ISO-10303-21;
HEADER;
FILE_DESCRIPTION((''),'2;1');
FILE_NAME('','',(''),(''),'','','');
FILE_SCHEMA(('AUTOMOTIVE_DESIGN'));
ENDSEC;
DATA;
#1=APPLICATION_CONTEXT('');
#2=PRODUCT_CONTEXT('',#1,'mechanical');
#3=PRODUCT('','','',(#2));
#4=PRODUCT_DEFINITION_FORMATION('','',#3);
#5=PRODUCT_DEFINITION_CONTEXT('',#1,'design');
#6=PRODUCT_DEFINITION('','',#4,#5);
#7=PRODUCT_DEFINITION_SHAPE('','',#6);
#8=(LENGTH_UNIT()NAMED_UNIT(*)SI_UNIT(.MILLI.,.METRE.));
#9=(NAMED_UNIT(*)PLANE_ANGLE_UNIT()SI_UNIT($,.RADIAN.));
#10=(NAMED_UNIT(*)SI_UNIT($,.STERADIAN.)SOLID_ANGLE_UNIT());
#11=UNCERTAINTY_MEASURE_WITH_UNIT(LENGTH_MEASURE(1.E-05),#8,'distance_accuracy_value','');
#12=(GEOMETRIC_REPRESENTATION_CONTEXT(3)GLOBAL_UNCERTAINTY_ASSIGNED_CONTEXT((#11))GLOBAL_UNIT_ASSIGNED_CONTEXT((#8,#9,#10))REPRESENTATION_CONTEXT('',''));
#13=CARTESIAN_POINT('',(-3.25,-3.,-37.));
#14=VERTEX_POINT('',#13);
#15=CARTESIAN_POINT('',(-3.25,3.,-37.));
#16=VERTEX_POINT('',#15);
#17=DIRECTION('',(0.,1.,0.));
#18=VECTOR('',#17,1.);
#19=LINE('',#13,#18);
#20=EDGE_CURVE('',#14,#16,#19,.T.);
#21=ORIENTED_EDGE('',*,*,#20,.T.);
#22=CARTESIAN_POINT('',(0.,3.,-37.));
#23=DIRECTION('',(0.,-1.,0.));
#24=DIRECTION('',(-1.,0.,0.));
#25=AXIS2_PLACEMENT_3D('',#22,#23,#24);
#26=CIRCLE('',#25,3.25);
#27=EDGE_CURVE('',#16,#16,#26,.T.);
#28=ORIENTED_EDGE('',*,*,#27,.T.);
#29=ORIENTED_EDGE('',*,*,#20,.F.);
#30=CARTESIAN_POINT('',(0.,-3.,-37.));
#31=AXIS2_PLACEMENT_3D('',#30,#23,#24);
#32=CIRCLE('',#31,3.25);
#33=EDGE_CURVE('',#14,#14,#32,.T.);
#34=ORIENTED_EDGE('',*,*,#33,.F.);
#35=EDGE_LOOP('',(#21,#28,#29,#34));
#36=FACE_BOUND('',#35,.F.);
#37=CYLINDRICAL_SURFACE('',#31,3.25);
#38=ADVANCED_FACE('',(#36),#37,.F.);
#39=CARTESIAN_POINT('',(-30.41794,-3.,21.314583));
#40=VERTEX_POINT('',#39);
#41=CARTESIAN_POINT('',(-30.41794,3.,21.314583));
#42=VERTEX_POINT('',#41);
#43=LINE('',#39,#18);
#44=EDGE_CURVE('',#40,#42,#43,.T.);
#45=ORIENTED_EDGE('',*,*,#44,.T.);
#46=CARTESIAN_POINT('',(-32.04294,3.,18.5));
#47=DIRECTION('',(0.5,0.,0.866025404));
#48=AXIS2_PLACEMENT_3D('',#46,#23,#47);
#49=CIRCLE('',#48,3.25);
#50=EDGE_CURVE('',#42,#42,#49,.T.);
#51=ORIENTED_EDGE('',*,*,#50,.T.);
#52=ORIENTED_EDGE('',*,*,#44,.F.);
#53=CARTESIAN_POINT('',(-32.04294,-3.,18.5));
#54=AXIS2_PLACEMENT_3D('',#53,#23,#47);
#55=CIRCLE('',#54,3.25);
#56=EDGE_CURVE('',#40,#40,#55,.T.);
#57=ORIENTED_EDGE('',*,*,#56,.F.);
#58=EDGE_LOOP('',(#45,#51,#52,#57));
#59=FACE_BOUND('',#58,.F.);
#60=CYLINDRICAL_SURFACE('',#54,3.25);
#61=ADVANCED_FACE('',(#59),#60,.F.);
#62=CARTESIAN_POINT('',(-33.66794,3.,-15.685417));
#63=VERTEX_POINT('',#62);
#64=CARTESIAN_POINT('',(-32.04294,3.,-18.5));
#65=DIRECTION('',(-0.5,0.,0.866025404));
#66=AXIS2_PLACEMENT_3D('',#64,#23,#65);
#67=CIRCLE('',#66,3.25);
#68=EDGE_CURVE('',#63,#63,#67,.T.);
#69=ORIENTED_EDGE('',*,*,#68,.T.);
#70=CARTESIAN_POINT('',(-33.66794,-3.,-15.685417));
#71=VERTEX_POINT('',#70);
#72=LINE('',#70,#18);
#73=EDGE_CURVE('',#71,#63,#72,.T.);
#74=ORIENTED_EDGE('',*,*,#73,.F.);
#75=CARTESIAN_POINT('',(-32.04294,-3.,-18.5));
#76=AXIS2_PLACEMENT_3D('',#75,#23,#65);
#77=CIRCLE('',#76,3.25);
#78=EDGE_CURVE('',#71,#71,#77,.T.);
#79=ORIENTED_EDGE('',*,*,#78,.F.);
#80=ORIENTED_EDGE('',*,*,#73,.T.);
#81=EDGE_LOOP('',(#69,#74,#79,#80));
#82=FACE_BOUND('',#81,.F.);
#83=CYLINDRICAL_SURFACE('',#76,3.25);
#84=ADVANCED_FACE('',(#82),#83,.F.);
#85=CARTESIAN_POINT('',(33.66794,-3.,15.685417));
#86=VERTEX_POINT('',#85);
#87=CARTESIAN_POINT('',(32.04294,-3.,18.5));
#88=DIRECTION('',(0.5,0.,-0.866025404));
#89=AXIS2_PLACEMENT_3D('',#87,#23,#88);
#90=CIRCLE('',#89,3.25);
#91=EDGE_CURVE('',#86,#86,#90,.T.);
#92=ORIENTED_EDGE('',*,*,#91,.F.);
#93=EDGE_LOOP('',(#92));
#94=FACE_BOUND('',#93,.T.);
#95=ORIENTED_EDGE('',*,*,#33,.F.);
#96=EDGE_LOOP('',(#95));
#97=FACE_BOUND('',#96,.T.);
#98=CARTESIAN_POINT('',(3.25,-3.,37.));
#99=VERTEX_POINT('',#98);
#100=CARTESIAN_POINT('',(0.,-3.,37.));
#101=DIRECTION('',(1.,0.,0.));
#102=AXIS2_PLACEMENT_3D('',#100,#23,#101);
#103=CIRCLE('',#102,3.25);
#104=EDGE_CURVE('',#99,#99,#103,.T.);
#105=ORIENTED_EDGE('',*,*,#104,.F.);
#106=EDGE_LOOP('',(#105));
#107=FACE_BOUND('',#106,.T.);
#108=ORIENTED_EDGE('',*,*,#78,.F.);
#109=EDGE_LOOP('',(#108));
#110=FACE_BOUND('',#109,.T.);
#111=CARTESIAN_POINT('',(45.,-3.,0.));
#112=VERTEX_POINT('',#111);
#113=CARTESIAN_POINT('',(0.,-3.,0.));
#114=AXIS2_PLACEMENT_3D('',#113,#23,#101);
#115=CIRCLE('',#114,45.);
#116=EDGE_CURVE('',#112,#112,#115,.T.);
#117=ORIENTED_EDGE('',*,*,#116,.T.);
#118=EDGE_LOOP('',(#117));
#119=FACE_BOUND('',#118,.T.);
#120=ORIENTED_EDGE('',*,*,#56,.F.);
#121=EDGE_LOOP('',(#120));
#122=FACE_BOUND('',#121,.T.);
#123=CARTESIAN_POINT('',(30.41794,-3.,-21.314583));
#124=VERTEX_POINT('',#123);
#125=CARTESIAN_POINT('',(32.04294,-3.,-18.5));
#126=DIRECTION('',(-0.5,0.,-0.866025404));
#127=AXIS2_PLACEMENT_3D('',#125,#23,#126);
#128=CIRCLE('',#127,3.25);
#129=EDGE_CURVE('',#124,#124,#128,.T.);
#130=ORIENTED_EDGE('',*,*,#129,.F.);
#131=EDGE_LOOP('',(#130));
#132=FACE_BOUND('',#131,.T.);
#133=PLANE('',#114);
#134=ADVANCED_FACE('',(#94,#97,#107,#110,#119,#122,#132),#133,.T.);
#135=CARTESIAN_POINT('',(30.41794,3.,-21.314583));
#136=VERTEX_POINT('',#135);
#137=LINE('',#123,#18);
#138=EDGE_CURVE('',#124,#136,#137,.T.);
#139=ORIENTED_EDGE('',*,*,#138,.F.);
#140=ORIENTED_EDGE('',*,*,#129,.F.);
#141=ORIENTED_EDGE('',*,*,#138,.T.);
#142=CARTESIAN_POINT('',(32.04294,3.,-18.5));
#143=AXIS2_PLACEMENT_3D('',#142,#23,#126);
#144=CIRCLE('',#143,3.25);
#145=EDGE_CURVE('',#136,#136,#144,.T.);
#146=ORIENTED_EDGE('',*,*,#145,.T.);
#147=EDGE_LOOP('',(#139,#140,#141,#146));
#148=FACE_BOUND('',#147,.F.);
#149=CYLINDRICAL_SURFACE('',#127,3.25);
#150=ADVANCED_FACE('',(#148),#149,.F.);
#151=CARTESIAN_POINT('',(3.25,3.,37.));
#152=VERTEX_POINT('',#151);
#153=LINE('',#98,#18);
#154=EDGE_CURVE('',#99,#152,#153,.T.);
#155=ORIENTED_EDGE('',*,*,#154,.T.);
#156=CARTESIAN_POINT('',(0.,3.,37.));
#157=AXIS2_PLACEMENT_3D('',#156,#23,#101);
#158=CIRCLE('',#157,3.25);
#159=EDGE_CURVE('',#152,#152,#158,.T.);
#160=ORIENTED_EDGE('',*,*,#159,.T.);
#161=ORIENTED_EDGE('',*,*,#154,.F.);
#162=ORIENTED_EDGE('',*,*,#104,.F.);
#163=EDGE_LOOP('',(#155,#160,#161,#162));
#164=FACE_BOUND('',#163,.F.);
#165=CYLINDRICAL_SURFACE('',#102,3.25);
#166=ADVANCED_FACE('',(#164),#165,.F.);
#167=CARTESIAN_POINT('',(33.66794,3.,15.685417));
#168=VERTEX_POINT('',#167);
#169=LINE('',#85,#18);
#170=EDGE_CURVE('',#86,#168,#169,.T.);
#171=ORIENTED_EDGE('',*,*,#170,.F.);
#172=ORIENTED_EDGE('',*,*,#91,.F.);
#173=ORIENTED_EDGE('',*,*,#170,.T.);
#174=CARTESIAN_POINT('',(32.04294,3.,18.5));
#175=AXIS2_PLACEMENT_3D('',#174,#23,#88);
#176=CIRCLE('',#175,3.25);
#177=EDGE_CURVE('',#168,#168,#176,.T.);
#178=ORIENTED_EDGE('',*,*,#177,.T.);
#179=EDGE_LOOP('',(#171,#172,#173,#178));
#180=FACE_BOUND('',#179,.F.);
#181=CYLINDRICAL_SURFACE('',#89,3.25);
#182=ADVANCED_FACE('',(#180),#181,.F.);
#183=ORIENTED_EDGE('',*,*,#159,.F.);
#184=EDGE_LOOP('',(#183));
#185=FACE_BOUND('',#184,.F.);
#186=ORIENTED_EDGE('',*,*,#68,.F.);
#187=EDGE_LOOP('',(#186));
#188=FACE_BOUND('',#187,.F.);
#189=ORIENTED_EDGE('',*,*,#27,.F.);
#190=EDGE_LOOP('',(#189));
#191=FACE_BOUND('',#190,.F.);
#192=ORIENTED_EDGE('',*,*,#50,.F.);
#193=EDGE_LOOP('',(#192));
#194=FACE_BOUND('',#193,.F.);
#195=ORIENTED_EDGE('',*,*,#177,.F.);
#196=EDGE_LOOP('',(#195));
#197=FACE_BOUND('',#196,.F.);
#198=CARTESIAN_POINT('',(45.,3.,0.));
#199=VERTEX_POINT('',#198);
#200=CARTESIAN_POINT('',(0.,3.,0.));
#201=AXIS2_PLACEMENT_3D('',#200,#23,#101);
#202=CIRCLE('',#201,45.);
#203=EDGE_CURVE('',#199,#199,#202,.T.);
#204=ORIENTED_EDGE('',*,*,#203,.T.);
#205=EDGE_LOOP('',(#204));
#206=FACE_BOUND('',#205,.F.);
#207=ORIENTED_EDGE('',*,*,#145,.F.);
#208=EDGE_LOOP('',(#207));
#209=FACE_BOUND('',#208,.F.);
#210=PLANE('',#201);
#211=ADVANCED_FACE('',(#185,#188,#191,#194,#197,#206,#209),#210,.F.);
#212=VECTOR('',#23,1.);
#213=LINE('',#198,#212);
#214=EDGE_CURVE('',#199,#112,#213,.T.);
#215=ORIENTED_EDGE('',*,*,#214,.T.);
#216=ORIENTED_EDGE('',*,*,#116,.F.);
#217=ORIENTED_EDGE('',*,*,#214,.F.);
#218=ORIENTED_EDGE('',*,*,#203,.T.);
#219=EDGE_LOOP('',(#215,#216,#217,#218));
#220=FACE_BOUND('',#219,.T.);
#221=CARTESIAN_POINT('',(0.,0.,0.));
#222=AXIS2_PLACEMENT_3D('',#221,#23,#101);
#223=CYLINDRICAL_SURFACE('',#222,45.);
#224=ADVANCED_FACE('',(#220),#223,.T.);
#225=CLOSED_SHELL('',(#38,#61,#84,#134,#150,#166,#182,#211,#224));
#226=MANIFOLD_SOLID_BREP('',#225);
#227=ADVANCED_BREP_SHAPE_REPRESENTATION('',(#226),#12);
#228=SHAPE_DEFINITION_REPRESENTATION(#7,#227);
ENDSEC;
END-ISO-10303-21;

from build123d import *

# Parameters (mm, degrees)
F0_R            = 45
F1_DEPTH        = 3
F2_R            = 3.25
F3_DEPTH        = 25
F3_COPIES_COUNT = 6


# Not quite as in the source:
# - a pattern or mirror of a feature is missing from the dataset's text; its kind, count and spacing are read off the source's solid


with BuildPart() as f1:
    # F0 (on Front) → F1 (new body, symmetric)
    with BuildSketch(Plane.XZ):
        Circle(F0_R)
    extrude(amount=F1_DEPTH, both=True)

    # F2 (on face) → F3 (cut)
    with BuildSketch(Plane.XZ.offset(3)):
        with Locations((0, 37)):
            Circle(F2_R)
    f3 = extrude(amount=-F3_DEPTH, mode=Mode.SUBTRACT)

    # F3_copies: F3 ×6 about axis
    f3_copies_axis = Axis((0, 0, 0), (0, 1, 0))
    for i in range(1, F3_COPIES_COUNT):
        add(f3.rotate(f3_copies_axis, i * 360 / F3_COPIES_COUNT), mode=Mode.SUBTRACT)


solid = f1.part
